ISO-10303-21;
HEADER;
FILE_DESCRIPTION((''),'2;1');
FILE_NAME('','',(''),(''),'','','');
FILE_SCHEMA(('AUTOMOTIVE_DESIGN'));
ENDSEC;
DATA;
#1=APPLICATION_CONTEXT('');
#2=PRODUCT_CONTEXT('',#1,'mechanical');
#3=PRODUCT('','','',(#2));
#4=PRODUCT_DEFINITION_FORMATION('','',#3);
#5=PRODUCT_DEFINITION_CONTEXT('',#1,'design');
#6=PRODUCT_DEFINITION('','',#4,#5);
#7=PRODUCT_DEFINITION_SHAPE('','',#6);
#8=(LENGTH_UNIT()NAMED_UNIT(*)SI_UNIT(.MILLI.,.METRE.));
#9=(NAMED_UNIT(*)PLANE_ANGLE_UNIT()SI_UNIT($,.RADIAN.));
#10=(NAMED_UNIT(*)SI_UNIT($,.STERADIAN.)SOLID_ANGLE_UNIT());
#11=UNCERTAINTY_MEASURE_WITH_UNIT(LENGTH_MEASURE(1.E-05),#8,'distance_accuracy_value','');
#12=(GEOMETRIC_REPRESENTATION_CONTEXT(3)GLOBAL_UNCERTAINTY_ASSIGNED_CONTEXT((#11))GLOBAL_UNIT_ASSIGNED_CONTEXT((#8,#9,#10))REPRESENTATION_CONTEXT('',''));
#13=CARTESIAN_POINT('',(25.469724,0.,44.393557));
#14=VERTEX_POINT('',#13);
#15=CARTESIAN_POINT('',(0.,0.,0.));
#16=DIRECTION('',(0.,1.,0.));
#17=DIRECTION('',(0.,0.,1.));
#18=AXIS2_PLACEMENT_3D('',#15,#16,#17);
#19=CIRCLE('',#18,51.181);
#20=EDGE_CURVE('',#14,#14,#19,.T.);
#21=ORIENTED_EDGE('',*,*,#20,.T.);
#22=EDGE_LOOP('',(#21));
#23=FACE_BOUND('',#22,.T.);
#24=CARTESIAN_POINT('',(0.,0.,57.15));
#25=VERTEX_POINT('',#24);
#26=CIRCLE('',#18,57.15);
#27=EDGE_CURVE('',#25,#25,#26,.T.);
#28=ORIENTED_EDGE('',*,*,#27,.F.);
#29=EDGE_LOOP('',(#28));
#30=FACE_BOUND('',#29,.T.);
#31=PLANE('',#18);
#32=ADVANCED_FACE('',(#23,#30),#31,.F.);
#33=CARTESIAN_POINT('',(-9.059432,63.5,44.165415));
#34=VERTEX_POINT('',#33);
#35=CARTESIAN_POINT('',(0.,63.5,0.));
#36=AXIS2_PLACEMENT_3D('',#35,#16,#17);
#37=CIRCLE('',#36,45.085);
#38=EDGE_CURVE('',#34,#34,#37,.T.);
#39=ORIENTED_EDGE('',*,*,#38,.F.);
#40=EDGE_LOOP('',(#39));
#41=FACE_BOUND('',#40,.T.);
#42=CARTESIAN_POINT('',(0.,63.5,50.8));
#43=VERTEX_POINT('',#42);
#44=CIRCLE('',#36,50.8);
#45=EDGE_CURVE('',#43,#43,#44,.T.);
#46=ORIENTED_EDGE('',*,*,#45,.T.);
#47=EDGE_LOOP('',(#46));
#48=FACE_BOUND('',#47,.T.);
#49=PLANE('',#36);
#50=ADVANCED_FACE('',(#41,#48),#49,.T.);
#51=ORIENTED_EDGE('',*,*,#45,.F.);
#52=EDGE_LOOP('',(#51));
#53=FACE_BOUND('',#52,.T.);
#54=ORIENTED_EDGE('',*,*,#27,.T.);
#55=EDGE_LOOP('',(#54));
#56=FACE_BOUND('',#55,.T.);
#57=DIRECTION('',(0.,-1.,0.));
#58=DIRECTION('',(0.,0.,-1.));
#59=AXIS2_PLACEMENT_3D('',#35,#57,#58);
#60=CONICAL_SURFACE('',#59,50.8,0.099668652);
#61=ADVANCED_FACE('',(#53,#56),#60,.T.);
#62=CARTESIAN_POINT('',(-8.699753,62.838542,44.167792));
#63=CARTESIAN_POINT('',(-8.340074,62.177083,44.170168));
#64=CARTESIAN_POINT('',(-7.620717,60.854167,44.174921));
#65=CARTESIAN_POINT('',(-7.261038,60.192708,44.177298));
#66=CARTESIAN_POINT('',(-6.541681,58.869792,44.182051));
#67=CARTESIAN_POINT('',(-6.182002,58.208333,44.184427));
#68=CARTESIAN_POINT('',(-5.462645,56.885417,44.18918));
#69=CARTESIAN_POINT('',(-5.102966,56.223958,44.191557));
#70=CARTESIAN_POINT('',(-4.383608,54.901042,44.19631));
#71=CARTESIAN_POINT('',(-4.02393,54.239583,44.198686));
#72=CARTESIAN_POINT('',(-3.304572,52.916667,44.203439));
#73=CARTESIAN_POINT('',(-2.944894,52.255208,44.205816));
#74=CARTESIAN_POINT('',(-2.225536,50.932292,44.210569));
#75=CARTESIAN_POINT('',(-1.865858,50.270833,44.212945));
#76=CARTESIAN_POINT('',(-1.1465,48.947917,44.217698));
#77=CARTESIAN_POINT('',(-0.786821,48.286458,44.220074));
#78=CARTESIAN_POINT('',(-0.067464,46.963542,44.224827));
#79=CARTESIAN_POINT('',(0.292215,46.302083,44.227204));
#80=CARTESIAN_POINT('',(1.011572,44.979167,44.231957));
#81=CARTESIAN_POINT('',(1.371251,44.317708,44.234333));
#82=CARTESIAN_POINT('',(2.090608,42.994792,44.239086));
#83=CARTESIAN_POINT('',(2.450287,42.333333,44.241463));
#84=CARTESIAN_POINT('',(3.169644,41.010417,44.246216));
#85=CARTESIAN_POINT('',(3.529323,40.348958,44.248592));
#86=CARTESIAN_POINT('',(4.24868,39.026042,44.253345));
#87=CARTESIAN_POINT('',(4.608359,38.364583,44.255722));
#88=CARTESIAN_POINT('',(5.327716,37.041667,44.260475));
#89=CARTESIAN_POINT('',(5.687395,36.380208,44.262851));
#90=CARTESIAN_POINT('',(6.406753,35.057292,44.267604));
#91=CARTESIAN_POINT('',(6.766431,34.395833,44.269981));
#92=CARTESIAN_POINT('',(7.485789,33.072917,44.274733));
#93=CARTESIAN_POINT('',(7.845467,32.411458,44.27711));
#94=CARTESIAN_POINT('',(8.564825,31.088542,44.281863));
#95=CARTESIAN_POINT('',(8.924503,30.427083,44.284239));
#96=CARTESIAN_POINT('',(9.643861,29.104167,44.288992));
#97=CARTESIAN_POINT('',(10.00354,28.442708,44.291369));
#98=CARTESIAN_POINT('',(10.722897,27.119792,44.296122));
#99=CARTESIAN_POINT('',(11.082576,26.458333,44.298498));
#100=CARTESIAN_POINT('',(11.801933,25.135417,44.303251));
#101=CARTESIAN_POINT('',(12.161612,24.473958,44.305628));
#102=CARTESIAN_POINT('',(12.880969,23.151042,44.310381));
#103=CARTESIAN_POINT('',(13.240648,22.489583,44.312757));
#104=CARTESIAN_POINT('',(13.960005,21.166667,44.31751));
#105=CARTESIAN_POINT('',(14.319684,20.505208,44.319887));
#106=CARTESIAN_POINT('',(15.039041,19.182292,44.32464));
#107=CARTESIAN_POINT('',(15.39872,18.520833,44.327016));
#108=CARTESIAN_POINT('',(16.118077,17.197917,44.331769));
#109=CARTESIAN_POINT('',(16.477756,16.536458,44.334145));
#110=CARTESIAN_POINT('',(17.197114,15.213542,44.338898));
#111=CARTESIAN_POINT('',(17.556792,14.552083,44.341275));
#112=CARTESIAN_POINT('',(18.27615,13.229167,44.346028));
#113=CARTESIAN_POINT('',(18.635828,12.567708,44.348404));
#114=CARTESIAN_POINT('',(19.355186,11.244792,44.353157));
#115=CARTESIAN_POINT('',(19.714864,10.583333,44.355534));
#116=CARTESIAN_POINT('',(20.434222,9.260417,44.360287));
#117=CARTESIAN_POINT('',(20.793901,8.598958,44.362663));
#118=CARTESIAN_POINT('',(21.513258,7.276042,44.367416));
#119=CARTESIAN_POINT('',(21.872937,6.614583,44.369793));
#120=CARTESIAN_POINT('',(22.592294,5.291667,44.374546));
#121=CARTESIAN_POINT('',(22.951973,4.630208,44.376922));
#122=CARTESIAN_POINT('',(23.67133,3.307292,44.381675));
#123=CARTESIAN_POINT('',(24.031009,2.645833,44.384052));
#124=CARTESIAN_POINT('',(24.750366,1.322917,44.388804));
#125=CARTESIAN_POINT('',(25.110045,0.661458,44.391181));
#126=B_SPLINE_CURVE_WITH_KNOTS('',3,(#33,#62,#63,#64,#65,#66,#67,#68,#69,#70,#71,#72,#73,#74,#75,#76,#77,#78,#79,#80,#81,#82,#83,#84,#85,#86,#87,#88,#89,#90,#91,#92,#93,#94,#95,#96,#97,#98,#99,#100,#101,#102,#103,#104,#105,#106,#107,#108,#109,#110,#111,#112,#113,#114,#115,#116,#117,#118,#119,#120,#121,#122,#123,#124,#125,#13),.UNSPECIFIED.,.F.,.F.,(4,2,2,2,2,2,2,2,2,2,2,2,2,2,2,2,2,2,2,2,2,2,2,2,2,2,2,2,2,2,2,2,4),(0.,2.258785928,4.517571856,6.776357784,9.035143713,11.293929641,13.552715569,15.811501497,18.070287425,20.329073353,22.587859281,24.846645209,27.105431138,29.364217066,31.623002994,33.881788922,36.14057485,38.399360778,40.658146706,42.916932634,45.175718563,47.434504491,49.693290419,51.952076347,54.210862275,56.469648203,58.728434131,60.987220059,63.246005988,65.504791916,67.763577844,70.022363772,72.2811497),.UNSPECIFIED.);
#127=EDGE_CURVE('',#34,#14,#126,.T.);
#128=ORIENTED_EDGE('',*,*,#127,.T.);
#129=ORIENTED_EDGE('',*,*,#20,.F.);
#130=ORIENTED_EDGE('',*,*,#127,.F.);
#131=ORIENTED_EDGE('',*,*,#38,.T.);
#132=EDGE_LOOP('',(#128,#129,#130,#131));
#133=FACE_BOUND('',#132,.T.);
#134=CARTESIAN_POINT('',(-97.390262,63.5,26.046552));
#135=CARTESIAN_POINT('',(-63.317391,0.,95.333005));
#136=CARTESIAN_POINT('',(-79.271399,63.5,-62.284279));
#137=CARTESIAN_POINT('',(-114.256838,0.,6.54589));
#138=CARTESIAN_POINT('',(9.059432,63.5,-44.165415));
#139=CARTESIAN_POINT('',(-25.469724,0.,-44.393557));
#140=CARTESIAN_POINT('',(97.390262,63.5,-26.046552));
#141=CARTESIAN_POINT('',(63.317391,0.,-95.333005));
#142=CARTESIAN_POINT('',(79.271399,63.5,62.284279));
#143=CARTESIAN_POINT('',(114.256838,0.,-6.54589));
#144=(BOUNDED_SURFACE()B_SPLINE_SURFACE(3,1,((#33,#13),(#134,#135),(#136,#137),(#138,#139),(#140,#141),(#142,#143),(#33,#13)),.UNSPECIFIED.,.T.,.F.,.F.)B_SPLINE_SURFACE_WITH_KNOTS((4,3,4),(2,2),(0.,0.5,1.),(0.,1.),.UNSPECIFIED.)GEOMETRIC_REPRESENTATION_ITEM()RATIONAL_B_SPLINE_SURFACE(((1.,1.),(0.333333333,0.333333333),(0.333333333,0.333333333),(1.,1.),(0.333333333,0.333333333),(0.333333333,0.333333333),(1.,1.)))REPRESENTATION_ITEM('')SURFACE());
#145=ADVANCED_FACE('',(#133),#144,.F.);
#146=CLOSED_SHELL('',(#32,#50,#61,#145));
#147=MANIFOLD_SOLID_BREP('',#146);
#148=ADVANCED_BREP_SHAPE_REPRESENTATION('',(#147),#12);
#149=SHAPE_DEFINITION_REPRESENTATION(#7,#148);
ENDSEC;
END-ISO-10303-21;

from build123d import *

# Parameters (mm, degrees)
SKETCH2_R = 50.8
SKETCH1_R = 57.15


with BuildPart() as part:
    # Sketch2 → Loft1 section 0
    with BuildSketch(Plane(origin=(0, 63.5, 0), x_dir=(1, 0, 0), z_dir=(0, 1, 0))):
        Circle(SKETCH2_R)
    # Sketch1 → Loft1 section 1
    with BuildSketch(Plane(origin=(0, 0, 0), x_dir=(1, 0, 0), z_dir=(0, 1, 0))):
        Circle(SKETCH1_R)
    loft()

    # Cut-Loft1: read off the stored shape, not the designer's step
    # Cut-Loft1: loft between two sections, ruled curve by curve
    cut_loft1_from = [
        Edge.make_bspline([(-9.059431508, 63.5, 44.165415494), (-97.390262496, 63.5, 26.046552478), (-79.27139948, 63.5, -62.28427851), (9.059431508, 63.5, -44.165415494), (97.390262496, 63.5, -26.046552478), (79.27139948, 63.5, 62.28427851), (-9.059431508, 63.5, 44.165415494)], [0, 0, 0, 0, 0.5, 0.5, 0.5, 1, 1, 1, 1], 3, [1, 0.333333333, 0.333333333, 1, 0.333333333, 0.333333333, 1]),
    ]
    cut_loft1_to = [
        Edge.make_bspline([(25.469723611, 0, 44.393557418), (-63.317391224, 0, 95.333004639), (-114.256838446, 0, 6.545889804), (-25.469723611, 0, -44.393557418), (63.317391224, 0, -95.333004639), (114.256838446, 0, -6.545889804), (25.469723611, 0, 44.393557418)], [0, 0, 0, 0, 0.5, 0.5, 0.5, 1, 1, 1, 1], 3, [1, 0.333333333, 0.333333333, 1, 0.333333333, 0.333333333, 1]),
    ]
    cut_loft1 = Solid(Shell([*[Face.make_surface_from_curves(cut_loft1_from[k], cut_loft1_to[k]) for k in range(1)], Face(Wire(cut_loft1_from)), Face(Wire(cut_loft1_to))]))
    add(cut_loft1, mode=Mode.SUBTRACT)


solid = part.part
